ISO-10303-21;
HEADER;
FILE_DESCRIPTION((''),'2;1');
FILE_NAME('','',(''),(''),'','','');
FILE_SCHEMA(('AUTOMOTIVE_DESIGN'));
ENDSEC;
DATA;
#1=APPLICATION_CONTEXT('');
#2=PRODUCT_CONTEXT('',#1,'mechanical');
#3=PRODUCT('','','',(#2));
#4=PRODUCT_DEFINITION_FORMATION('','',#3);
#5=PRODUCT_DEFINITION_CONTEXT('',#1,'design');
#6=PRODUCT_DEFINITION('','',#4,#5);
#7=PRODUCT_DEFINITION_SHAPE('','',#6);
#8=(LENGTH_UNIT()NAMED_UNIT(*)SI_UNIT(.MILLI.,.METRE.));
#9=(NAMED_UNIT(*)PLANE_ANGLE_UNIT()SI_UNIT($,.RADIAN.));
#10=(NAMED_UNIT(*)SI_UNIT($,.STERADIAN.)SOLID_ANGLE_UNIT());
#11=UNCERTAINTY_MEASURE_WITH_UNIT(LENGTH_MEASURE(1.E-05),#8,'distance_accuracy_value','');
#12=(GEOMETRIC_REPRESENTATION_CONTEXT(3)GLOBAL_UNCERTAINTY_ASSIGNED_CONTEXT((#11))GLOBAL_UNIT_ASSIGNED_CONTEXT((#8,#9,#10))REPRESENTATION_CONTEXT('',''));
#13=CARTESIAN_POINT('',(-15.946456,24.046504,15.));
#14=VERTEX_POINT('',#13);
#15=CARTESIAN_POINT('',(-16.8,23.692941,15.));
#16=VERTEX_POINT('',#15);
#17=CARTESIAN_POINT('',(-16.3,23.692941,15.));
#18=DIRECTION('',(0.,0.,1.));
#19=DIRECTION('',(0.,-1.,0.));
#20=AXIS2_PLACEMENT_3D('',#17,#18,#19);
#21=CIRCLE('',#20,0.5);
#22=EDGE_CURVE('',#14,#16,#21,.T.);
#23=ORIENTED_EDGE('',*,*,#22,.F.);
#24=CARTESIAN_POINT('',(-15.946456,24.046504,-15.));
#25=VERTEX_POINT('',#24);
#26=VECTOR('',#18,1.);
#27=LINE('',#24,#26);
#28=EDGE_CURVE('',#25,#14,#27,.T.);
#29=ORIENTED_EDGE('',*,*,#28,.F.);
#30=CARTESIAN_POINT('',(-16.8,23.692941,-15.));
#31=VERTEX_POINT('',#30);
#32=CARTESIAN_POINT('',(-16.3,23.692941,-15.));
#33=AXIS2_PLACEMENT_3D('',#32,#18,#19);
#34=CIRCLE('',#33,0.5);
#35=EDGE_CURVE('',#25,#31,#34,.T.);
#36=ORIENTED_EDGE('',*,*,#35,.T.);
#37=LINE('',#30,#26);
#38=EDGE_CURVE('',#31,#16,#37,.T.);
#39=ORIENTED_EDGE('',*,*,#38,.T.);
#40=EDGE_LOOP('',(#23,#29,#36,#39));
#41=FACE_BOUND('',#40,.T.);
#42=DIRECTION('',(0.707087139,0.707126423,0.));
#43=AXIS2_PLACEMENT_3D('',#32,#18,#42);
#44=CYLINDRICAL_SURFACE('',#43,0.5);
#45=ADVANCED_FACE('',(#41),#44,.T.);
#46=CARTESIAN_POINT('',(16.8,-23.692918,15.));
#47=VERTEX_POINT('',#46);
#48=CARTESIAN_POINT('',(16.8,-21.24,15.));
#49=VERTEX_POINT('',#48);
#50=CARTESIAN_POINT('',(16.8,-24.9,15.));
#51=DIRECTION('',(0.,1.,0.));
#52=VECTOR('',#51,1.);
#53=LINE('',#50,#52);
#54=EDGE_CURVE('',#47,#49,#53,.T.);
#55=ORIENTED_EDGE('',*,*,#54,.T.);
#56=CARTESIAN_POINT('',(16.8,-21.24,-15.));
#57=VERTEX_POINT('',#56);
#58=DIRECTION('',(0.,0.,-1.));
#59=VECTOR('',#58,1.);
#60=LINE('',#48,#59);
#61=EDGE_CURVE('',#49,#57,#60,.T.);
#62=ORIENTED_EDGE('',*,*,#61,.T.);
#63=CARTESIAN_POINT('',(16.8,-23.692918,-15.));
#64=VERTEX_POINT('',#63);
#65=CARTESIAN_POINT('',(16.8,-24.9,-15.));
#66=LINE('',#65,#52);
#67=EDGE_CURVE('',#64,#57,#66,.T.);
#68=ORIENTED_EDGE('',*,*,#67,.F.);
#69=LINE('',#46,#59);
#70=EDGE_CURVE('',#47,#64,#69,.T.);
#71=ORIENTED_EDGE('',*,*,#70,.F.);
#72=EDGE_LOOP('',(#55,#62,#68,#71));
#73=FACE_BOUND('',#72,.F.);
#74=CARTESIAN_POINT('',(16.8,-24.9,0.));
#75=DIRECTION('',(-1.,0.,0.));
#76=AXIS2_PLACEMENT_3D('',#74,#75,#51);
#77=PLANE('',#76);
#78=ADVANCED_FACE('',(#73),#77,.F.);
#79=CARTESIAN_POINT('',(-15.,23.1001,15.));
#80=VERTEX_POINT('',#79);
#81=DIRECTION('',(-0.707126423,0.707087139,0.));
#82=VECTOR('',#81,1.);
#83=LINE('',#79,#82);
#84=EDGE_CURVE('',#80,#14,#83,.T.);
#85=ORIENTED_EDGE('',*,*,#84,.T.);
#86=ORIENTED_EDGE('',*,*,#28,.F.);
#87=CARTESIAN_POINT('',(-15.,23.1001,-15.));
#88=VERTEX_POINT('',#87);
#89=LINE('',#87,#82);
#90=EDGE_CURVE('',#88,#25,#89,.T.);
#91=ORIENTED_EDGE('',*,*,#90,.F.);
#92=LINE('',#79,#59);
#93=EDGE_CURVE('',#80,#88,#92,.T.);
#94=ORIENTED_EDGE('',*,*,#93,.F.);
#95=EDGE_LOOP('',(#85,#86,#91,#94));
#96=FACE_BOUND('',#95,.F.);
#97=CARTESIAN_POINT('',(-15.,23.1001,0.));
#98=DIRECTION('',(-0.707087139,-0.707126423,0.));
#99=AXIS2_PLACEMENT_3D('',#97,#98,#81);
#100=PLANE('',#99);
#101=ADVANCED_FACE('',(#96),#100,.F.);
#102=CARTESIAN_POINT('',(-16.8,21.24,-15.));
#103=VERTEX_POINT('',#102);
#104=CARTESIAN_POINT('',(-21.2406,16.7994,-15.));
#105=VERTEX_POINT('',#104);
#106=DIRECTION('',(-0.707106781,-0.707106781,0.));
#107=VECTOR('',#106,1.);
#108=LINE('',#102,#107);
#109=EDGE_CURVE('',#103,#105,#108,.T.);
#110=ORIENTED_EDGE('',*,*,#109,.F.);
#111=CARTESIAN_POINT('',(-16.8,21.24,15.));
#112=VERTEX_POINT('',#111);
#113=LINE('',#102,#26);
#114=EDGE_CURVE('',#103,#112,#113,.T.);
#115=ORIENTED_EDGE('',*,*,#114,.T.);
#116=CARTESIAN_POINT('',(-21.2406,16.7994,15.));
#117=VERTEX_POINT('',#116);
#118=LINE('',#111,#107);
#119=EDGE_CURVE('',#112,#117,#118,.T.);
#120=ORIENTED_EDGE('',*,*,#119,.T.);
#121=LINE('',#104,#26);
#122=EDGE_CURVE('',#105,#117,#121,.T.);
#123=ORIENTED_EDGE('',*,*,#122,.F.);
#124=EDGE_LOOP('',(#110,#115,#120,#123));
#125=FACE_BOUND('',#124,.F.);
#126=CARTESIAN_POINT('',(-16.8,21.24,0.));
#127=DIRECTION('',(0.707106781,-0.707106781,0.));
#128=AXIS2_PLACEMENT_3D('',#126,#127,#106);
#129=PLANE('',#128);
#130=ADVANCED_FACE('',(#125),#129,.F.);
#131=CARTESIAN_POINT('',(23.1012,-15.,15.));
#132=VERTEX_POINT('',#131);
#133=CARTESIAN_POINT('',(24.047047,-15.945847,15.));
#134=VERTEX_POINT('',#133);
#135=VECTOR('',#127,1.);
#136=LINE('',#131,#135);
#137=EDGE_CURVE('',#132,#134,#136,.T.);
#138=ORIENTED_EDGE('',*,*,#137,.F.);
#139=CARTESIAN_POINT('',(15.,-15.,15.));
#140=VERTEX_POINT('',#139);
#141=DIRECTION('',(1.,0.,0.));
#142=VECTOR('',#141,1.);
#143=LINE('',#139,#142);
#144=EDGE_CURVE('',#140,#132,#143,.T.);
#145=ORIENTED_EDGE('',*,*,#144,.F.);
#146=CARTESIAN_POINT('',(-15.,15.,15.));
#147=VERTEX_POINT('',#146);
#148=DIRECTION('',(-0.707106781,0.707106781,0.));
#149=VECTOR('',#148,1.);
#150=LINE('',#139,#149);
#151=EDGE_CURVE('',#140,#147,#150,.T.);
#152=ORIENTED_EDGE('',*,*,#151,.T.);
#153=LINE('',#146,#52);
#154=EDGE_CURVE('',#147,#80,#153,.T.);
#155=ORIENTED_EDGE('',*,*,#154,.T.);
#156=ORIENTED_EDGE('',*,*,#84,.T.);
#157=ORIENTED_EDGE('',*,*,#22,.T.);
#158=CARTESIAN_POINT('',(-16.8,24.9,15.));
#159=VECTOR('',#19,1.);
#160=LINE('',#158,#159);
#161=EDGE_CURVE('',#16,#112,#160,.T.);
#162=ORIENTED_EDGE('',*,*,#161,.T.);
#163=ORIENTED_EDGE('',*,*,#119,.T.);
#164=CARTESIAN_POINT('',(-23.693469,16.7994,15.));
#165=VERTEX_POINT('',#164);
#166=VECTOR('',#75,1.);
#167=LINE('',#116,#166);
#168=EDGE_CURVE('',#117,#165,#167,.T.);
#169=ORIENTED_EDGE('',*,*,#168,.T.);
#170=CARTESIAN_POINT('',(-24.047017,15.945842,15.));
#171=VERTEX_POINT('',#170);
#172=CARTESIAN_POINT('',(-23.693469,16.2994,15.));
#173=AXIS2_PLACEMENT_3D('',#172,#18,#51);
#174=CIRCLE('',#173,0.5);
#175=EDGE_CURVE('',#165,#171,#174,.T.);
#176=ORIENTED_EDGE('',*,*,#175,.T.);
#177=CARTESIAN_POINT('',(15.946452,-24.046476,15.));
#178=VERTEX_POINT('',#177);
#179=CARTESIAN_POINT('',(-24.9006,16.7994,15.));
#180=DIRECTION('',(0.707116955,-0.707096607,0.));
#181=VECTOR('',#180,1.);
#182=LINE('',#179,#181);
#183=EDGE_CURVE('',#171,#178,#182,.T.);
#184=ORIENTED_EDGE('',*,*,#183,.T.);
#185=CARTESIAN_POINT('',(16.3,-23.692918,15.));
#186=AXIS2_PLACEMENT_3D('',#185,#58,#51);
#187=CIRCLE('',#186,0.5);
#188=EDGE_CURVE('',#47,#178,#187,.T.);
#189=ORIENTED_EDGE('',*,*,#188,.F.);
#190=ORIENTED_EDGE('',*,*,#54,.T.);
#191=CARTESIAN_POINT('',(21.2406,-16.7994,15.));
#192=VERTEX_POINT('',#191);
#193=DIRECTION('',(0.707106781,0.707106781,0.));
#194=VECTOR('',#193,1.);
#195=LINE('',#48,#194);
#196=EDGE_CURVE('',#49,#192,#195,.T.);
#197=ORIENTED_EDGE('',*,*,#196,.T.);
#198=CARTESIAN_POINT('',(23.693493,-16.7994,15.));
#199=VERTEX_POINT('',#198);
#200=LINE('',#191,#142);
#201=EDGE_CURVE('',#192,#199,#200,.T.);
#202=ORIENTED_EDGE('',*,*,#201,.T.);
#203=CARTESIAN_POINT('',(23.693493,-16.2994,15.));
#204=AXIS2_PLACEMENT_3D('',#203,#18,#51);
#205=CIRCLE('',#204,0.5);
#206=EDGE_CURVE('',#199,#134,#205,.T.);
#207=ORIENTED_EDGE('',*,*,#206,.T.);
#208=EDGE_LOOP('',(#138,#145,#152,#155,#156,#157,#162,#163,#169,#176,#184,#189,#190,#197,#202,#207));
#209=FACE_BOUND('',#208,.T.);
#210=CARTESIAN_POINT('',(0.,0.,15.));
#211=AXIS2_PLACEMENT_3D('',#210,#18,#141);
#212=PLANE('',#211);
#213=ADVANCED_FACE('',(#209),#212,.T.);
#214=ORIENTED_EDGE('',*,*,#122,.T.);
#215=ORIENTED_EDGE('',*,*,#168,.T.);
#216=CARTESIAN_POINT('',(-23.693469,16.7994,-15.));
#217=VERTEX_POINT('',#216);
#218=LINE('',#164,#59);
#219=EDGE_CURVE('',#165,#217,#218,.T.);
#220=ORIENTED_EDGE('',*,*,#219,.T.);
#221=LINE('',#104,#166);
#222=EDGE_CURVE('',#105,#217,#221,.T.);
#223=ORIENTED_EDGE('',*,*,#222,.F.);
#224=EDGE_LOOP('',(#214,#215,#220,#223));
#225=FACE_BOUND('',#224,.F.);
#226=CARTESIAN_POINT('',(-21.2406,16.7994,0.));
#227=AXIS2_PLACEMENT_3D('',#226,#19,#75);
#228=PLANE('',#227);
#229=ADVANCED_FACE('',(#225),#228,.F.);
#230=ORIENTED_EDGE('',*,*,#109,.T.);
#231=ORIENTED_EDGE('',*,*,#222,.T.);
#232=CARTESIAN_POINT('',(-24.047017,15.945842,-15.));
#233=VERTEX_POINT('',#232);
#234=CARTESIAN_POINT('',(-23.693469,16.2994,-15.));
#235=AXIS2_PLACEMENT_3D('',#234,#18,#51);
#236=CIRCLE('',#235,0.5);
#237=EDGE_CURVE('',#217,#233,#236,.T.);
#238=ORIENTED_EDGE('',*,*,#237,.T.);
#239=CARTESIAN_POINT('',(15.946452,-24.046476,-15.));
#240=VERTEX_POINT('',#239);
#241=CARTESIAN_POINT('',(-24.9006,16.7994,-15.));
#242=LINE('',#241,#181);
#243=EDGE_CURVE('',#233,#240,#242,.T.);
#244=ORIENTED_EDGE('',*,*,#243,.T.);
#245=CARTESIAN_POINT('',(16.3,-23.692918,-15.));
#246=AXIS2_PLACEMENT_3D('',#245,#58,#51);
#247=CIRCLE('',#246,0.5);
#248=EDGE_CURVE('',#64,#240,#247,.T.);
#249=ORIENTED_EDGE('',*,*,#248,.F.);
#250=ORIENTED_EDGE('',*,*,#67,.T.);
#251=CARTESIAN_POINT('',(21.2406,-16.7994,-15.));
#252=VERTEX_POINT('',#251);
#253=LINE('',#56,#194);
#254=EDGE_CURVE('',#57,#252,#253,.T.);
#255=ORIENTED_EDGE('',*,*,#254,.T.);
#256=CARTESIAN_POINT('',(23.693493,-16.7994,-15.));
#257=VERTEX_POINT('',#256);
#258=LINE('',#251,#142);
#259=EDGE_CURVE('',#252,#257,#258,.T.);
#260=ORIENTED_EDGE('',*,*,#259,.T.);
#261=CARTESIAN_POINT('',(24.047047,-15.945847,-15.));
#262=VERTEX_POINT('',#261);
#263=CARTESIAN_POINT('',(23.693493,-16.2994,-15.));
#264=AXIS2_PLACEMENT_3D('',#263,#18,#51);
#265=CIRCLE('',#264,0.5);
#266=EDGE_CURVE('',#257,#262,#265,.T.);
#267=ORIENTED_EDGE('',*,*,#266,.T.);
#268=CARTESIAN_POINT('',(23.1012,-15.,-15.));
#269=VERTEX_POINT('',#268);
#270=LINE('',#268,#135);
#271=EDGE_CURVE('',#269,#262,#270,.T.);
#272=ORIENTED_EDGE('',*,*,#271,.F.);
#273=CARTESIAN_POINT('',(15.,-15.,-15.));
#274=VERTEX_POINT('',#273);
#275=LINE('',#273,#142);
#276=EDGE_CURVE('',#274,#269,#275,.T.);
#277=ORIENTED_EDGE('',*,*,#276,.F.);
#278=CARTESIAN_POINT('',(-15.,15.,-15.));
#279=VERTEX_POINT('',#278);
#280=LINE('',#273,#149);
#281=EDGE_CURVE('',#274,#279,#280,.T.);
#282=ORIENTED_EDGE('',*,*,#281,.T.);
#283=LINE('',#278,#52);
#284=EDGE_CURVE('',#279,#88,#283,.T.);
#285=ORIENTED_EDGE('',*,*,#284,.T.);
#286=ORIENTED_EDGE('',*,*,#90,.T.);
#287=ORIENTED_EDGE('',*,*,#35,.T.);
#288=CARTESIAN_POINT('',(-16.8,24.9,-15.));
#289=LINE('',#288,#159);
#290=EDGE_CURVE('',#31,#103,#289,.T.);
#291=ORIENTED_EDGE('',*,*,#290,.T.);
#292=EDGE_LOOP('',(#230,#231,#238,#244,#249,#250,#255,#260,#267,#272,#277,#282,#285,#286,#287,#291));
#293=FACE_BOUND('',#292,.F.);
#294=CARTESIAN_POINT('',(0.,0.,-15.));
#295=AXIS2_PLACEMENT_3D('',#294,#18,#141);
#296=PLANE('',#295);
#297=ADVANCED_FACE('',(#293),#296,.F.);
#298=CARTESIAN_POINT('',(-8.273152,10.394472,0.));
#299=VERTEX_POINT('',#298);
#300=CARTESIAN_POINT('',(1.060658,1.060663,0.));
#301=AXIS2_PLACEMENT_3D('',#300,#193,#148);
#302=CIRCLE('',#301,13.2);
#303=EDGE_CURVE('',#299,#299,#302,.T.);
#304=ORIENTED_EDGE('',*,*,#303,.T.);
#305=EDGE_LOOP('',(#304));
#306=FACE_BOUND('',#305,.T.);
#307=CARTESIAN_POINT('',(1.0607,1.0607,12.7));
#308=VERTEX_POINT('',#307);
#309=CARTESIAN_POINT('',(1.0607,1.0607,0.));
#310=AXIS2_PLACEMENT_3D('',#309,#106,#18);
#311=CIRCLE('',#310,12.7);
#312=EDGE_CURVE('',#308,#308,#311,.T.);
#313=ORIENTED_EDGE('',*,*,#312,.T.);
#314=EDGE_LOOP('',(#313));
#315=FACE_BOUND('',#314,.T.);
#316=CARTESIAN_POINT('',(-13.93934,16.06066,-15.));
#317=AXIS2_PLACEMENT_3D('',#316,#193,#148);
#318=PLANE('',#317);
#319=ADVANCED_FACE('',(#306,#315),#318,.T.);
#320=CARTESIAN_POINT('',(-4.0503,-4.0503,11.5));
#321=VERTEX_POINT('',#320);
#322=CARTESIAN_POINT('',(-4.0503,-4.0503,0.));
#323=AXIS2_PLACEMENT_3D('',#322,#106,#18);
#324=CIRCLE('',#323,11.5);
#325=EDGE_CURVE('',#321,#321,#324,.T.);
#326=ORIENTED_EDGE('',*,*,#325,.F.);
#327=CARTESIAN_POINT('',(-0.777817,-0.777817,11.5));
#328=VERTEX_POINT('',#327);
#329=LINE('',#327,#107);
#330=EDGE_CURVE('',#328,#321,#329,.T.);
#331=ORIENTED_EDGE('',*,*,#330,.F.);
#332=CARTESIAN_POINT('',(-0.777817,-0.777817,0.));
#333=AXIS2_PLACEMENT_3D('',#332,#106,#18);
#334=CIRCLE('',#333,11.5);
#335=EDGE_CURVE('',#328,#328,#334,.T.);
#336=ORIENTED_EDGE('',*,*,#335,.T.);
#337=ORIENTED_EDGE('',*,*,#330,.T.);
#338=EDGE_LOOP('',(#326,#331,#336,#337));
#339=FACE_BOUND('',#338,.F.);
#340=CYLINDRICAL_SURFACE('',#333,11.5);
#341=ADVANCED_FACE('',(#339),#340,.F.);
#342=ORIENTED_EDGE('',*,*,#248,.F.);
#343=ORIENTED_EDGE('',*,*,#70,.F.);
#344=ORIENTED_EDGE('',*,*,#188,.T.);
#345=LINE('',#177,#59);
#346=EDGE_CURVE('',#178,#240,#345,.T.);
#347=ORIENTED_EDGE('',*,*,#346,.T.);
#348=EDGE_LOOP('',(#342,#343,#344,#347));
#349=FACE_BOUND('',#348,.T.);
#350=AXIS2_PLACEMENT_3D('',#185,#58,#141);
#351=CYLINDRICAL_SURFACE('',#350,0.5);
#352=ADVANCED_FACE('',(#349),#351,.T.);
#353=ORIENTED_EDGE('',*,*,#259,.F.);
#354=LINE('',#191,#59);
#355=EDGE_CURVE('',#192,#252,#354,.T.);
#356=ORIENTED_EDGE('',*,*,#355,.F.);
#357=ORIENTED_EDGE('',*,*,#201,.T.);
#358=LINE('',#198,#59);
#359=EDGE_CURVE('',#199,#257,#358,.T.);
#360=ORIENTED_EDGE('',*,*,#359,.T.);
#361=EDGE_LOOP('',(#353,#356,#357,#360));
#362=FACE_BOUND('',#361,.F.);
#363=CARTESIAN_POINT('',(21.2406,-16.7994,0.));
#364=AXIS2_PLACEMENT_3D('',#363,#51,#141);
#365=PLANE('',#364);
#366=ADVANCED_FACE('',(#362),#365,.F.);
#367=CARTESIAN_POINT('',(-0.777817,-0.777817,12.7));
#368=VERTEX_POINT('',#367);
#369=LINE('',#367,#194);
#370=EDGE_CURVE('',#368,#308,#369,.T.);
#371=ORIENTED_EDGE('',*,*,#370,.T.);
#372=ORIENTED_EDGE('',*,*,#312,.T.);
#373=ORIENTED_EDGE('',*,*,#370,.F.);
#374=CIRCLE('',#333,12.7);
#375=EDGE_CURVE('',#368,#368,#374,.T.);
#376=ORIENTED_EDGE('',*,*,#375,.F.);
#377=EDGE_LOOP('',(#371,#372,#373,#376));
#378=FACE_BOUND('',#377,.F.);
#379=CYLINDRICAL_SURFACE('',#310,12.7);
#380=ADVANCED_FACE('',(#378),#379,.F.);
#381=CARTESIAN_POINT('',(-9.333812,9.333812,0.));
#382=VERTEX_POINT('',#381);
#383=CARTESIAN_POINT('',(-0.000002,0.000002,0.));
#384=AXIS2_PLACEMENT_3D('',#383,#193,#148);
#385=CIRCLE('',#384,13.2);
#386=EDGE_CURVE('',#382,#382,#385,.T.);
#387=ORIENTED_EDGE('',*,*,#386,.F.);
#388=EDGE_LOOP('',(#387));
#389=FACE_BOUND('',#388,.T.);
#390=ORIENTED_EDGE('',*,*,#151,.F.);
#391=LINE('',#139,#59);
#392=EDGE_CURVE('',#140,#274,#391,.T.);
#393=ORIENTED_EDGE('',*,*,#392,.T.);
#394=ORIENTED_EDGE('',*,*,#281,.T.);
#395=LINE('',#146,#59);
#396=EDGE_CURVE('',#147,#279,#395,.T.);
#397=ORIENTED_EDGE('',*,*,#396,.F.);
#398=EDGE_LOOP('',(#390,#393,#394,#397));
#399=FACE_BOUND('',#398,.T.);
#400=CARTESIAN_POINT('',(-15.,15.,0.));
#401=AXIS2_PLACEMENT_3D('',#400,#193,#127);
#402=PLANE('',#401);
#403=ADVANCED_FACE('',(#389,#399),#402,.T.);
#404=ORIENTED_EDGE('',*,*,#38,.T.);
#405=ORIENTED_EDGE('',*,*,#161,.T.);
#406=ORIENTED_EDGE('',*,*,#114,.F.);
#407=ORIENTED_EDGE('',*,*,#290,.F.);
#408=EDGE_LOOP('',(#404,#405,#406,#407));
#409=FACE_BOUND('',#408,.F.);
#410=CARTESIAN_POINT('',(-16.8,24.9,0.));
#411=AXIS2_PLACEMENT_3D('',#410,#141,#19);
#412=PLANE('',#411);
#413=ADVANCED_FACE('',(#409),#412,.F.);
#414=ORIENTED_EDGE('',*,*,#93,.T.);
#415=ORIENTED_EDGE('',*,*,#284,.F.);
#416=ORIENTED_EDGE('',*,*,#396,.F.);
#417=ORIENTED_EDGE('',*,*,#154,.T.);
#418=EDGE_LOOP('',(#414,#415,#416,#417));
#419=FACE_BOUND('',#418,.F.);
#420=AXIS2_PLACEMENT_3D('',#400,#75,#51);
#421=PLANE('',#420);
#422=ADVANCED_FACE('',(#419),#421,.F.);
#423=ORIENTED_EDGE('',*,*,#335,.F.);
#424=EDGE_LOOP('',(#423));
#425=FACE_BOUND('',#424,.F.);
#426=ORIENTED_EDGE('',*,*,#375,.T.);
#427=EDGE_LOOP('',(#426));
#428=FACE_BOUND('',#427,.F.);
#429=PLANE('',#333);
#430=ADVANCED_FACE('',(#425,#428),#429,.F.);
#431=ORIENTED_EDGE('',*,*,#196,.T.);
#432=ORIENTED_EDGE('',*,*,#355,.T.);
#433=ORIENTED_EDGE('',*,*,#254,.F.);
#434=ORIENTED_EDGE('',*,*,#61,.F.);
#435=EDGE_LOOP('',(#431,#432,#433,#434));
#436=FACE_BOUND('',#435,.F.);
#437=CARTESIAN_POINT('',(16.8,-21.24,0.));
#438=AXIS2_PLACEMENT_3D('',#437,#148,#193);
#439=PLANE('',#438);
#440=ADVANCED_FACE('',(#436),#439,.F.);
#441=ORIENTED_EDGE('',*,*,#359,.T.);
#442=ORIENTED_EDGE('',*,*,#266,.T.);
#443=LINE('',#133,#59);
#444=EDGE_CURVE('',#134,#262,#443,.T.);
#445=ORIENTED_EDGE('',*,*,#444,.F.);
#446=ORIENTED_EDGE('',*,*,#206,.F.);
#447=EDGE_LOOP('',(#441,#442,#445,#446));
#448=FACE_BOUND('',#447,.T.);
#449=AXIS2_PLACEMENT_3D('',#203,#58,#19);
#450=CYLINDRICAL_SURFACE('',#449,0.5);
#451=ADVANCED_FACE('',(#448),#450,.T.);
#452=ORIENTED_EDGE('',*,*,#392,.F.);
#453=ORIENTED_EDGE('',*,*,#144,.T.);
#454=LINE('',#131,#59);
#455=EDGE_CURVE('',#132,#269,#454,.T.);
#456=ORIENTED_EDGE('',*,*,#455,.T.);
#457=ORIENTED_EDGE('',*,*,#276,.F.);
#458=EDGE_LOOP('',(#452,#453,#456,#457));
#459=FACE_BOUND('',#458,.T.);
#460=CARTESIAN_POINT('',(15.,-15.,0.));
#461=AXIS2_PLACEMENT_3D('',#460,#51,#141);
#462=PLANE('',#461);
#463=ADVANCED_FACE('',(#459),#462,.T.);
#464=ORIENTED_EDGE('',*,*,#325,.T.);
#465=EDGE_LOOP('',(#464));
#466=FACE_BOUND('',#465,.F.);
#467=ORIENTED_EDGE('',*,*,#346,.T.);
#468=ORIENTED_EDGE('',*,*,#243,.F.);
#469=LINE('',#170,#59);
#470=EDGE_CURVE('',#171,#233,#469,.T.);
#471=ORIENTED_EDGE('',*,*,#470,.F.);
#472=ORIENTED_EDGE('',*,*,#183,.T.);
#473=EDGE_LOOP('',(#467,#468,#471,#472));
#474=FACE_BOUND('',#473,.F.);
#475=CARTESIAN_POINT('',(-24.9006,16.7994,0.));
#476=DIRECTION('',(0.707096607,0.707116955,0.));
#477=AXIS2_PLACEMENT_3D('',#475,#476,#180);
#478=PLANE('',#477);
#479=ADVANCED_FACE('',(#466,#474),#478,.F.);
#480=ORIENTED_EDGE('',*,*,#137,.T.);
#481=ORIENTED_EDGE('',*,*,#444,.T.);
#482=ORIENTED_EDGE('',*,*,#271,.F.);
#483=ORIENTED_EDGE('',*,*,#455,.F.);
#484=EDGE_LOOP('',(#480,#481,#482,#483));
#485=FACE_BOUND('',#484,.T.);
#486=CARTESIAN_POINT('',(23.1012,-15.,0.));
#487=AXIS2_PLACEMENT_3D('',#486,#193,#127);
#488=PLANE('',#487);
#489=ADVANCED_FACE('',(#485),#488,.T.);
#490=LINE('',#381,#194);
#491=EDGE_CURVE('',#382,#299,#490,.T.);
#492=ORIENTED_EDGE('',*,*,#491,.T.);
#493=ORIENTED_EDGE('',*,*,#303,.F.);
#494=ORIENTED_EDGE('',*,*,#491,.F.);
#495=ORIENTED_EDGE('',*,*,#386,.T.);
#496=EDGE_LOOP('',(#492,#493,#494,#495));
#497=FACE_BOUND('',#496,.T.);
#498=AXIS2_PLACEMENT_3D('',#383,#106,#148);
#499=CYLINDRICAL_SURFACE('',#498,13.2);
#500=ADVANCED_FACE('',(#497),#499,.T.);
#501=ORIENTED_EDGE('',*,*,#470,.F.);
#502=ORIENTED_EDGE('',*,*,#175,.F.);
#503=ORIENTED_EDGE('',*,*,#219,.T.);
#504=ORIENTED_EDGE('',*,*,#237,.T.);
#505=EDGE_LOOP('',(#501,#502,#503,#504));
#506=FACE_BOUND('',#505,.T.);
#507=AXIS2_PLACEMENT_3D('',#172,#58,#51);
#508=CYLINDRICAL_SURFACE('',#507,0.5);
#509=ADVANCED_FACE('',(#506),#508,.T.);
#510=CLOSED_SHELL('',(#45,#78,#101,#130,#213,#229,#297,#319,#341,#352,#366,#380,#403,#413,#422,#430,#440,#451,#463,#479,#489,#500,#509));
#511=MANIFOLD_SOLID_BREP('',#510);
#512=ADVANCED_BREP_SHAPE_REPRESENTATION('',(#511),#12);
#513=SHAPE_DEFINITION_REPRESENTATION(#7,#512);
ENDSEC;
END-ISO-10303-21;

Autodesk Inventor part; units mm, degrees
ref_plane "YZ Plane" through (0, 0, 0) normal (1, 0, 0) x (0, 1, 0)
ref_plane "XZ Plane" through (0, 0, 0) normal (0, 1, 0) x (-1, 0, 0)
ref_plane "XY Plane" through (0, 0, 0) normal (0, 0, 1) x (1, 0, 0)
sketch "草图1" plane through (0, 0, 0) normal (0, 0, 1) x (1, 0, 0)
  line L0 (-16.8, 24.9) -> (-16.8, 21.24)
  line L1 (-16.8, 21.24) -> (-21.2406, 16.7994)
  line L2 (-21.2406, 16.7994) -> (-24.9006, 16.7994)
  line L3 (16.8, -24.9) -> (16.8, -21.24)
  line L4 (16.8, -21.24) -> (21.2406, -16.7994)
  line L5 (21.2406, -16.7994) -> (24.9006, -16.7994)
  line L6 (-24.9006, 16.7994) -> (16.8, -24.9)
  line L7 (0, 0) -> (-0.1347, -0.1347)
  line L8 (22.4746, -22.7439) -> (22.4746, -22.7439)
  line L9 (-15, 15) -> (-15, 23.1001)
  line L10 (15, -15) -> (23.1012, -15)
  line L11 (-15, 23.1001) -> (-16.8, 24.9)
  line L12 (23.1012, -15) -> (24.9006, -16.7994)
  line L13 (-15, 15) -> (15, -15)
extrude "拉伸1" add sketch "草图1" along normal blind 15 and the other way blind 15
sketch "草图2" plane through (-15, 15, -15) normal (0.7071068, 0.7071068, 0) x (-0.7071068, 0.7071068, 0)
  point P0 (-21.2132, 15)
  point P1 (-21.2132, 15)
hole "孔1" at (0, 0, 0) direction (-0.7071068, -0.7071068, 0) diameter 23 end through all counterbore diameter 25.4 counterbore depth 1.1
sketch "草图3" plane through (-15, 15, -15) normal (0.7071068, 0.7071068, 0) x (-0.7071068, 0.7071068, 0)
  point P0 (-21.2132, 15)
sketch "草图4" plane through (-15, 15, -15) normal (0.7071068, 0.7071068, 0) x (-0.7071068, 0.7071068, 0)
  point P0 (-21.2132, 15)
sketch "草图5" plane through (-15, 15, -15) normal (0.7071068, 0.7071068, 0) x (-0.7071068, 0.7071068, 0)
  circle A0 centre (-21.2132, 15) radius 12.7
  circle A1 centre (-21.2132, 15) radius 13.2
  dimension "d18" = 0.5
  dimension "d19" = 25.4
extrude "拉伸2" add sketch "草图5" along normal blind 1.5 contours A0 | A1
sketch "草图6" plane through (1.0607, 1.0607, 0) normal (0.7071068, 0.7071068, 0) x (-0.7071068, 0.7071068, 0)
  point P0 (0, 0)
  point P1 (0, 0)
hole "孔2" at (1.0607, 1.0607, 0) direction (-0.7071068, -0.7071068, 0) diameter 25.4 end up to surface
fillet "圆角1" radius 0.5 1 edges at (-16.8, 24.9, 0)
fillet "圆角2" radius 0.5 1 edges at (-24.9006, 16.7994, 0)
fillet "圆角3" radius 0.5 1 edges at (24.9006, -16.7994, 0)
fillet "圆角4" radius 0.5 1 edges at (16.8, -24.9, 0)
sketch "草图7" plane through (-15, 15, -15) normal (0.7071068, 0.7071068, 0) x (-0.7071068, 0.7071068, 0)
  point P0 (-21.2132, 15)
equation "\"d15\" = Thickness"
equation "\"BendRadius\" = Thickness"
equation "\"BendReliefWidth\" = Thickness"
equation "\"BendReliefDepth\" = 0.5 * Thickness"
equation "\"CornerReliefSize\" = 4 * Thickness"
equation "\"MinimumRemnant\" = 2 * Thickness"
equation "\"TransitionRadius\" = BendRadius"
equation "\"JacobiRadiusSize\" = BendRadius"
equation "\"GapSize\" = Thickness"
equation "\"Thickness\" = 0.5"
properties part number "fenguangjing"
